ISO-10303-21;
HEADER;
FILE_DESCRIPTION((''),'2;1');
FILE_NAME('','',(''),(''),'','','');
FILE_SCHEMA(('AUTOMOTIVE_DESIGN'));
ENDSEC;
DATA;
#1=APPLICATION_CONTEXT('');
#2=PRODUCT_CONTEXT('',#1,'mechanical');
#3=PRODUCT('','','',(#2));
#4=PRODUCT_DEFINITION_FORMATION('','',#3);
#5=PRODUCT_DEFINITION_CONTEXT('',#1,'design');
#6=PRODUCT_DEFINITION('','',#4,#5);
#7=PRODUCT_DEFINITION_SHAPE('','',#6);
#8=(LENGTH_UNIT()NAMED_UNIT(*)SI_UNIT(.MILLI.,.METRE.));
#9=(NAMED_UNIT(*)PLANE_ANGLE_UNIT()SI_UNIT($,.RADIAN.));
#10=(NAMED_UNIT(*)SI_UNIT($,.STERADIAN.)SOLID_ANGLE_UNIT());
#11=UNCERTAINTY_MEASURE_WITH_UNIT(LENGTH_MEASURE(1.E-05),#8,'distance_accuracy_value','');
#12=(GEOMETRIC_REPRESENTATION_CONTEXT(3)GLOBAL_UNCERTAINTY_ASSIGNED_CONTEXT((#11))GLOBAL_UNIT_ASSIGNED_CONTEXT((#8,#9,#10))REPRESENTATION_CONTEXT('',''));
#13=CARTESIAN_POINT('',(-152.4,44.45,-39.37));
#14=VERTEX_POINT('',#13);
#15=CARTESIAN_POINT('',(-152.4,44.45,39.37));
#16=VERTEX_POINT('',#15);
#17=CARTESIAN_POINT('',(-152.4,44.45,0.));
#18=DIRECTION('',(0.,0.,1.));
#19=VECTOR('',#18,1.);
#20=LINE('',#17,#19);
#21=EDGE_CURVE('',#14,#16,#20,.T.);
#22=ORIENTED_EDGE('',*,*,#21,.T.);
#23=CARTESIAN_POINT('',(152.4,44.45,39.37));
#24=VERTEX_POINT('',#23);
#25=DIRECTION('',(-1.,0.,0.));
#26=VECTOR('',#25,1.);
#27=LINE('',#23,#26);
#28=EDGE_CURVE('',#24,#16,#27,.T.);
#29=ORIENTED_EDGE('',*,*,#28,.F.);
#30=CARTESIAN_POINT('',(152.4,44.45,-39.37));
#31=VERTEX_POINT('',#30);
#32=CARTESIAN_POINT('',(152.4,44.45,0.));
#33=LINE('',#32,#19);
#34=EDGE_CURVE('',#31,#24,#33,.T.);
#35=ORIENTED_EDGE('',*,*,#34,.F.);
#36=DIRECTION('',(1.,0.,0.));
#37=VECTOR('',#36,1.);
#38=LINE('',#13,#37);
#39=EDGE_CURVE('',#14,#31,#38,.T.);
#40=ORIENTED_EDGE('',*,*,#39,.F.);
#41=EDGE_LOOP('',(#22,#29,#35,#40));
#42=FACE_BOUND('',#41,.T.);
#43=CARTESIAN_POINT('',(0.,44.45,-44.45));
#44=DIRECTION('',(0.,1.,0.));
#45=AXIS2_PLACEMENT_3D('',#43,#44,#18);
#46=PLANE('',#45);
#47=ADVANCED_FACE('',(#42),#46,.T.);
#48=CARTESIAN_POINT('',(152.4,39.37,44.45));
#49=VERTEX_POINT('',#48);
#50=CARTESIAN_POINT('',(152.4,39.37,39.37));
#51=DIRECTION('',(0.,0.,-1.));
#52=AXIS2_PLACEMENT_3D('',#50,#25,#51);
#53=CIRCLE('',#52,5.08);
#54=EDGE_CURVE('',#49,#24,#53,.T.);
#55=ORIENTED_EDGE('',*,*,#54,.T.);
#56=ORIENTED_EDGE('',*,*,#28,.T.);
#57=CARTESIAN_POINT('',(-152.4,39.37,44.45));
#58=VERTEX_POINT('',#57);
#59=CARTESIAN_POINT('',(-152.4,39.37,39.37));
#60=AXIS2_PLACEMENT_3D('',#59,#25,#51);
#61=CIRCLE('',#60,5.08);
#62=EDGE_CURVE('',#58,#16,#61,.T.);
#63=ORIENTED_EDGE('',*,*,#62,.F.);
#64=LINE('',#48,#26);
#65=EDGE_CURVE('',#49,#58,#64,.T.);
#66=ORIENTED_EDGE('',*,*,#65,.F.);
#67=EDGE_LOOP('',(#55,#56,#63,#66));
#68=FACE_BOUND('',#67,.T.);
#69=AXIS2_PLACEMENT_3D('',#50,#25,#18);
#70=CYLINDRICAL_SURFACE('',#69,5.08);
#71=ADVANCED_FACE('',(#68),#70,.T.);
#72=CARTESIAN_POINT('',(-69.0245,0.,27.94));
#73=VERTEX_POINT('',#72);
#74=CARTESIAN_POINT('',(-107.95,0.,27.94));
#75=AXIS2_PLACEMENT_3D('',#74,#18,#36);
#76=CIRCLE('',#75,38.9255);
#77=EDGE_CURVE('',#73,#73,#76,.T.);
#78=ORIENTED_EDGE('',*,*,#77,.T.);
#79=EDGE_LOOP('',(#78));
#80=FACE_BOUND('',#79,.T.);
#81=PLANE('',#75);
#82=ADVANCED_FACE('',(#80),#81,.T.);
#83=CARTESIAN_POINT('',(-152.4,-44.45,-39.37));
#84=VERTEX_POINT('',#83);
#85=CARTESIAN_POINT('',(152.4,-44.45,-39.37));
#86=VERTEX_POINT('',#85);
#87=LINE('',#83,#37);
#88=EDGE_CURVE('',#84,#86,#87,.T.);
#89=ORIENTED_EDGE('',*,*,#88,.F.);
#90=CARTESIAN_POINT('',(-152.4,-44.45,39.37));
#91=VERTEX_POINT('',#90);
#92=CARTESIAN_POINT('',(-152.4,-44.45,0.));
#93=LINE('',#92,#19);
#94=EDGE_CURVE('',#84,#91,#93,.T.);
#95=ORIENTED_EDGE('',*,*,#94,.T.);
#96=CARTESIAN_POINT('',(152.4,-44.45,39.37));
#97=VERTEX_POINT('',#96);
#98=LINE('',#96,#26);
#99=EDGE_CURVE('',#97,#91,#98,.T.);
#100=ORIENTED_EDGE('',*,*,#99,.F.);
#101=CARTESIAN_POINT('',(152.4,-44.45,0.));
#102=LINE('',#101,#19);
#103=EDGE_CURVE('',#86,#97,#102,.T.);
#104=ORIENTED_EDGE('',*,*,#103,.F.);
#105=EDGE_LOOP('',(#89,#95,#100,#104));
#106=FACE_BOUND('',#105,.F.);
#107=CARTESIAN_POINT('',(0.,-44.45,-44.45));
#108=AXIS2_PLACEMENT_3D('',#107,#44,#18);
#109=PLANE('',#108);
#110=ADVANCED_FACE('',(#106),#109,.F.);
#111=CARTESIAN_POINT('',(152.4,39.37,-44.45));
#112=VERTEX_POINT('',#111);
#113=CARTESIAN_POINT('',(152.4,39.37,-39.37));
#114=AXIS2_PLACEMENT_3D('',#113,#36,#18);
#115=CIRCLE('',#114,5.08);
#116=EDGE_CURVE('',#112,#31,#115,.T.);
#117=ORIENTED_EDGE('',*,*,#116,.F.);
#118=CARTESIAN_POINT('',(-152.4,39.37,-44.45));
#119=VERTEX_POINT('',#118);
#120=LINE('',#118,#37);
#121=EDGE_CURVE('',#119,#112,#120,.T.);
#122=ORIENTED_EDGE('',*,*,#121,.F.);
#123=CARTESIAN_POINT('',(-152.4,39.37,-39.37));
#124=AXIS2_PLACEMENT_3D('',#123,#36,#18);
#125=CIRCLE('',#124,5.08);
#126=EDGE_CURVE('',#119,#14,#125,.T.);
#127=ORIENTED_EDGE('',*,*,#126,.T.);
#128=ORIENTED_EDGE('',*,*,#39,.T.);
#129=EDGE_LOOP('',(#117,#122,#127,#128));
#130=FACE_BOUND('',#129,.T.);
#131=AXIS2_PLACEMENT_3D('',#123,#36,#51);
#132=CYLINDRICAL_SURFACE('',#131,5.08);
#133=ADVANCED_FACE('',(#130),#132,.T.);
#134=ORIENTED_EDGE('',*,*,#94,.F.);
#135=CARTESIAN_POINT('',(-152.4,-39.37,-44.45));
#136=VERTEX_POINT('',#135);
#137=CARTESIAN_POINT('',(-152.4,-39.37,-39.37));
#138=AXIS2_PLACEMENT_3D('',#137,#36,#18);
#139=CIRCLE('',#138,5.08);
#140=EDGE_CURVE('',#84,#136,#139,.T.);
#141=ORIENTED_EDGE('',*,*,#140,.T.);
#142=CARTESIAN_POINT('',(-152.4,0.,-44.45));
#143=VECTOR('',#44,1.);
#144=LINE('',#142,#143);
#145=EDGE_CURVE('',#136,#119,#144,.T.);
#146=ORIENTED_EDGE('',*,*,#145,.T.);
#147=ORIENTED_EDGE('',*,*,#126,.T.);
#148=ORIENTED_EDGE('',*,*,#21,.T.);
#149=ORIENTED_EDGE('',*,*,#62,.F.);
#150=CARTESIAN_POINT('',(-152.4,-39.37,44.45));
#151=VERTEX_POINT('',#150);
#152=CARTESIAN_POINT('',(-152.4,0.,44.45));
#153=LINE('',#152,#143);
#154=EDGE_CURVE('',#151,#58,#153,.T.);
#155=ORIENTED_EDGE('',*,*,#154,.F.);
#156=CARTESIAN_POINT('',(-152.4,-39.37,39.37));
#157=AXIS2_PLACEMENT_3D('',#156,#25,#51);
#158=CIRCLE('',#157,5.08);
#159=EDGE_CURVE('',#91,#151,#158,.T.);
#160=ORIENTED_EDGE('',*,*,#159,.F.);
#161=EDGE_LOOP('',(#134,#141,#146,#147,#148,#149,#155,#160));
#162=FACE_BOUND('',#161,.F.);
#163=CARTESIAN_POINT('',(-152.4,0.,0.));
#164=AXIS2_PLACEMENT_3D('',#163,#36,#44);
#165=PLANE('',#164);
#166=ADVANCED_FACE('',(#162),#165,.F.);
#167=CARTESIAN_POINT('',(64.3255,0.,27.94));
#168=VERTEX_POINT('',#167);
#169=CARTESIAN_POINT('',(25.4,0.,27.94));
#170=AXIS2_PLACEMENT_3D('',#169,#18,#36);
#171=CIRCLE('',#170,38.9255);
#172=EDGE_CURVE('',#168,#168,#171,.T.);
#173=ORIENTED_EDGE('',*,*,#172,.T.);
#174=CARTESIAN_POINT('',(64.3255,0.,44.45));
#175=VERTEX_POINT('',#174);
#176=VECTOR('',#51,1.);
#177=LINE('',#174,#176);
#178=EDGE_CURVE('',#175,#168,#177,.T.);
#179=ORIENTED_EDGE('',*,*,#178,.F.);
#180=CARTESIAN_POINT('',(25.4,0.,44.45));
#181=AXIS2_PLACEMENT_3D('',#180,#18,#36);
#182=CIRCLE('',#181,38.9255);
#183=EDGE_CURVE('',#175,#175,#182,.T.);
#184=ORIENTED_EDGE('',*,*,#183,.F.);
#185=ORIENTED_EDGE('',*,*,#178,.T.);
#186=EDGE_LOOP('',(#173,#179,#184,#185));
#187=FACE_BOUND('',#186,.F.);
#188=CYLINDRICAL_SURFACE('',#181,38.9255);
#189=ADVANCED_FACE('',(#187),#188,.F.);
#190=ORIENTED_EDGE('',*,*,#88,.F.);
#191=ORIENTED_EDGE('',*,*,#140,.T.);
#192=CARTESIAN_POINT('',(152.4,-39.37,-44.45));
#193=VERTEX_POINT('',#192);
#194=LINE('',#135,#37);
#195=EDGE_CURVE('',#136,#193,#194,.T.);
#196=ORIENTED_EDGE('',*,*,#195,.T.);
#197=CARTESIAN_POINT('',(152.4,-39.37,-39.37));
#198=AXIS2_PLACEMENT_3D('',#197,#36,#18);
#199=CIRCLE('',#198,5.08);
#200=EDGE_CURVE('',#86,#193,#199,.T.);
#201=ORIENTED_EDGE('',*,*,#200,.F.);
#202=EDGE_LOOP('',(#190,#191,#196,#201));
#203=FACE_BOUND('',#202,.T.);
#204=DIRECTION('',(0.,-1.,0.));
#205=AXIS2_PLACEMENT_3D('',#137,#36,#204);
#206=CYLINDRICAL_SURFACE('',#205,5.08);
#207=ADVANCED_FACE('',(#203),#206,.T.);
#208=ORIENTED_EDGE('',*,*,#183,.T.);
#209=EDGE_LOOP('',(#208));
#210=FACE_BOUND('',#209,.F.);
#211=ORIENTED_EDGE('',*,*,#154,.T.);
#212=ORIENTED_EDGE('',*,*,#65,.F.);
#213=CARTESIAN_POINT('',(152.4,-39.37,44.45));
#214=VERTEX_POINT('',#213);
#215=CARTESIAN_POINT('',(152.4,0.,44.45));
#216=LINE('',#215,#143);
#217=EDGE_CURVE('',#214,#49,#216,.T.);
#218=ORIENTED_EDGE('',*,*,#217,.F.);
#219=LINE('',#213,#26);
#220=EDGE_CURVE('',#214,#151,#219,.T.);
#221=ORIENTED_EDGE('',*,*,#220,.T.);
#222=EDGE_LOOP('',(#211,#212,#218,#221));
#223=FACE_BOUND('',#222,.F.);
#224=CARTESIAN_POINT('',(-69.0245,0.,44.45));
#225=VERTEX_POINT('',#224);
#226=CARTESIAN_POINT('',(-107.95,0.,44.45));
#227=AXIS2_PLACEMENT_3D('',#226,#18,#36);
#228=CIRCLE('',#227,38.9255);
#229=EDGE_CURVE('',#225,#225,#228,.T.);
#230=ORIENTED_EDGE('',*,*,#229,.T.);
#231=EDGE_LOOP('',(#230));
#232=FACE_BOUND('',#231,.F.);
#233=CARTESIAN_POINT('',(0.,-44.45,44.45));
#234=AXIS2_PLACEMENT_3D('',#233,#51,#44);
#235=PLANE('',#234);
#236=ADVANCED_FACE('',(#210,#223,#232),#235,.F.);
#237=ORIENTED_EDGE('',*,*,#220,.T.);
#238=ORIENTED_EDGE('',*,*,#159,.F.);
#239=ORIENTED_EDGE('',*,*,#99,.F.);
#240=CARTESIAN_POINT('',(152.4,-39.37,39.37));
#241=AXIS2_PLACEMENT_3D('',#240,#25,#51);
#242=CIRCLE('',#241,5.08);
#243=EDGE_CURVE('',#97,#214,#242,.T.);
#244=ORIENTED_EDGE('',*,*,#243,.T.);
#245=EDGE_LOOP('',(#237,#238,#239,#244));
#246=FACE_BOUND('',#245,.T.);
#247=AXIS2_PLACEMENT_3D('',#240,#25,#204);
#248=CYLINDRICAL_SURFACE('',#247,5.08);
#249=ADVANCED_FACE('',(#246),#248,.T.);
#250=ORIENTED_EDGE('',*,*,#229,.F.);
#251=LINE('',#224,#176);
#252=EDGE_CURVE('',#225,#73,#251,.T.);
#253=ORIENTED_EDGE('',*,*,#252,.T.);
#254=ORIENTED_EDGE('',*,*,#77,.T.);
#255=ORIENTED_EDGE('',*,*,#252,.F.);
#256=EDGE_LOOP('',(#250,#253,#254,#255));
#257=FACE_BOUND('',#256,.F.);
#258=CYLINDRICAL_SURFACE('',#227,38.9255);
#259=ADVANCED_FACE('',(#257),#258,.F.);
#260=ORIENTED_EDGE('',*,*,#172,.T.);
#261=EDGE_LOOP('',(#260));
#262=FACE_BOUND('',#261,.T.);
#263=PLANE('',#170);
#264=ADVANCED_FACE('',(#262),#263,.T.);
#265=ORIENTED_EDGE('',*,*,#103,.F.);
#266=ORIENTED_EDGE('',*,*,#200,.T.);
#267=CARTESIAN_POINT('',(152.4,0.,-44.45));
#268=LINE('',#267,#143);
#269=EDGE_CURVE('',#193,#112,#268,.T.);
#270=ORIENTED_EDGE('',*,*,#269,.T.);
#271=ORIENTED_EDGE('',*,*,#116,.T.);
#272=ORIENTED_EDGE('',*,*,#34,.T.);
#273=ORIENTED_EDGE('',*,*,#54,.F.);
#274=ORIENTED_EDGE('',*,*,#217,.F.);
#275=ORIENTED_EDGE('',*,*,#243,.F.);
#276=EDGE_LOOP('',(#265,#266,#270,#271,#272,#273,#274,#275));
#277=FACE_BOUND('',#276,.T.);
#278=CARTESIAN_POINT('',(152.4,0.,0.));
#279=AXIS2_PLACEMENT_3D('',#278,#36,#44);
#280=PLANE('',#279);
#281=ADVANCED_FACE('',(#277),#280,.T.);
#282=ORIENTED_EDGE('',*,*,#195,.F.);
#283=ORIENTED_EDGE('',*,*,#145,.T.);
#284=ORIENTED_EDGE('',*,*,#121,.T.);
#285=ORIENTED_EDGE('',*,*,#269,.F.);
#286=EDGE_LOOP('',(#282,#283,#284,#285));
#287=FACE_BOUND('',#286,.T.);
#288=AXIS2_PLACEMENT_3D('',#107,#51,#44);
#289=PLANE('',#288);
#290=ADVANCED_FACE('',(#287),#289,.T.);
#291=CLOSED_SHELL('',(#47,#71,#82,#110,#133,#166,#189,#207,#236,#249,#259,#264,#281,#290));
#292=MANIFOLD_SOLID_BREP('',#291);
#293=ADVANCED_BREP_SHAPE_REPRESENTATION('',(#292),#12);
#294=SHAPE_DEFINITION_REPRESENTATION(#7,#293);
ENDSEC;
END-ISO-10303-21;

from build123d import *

# Parameters (mm, degrees)
F0_W          = 88.9
F0_H          = 88.9
F1_DEPTH      = 152.4
F1_DEPTH_BACK = 152.4
F2_R          = 38.9255
F3_DEPTH      = 16.51
F4_R          = 5.08


with BuildPart() as f1:
    # F0 (on Right) → F1 (new body, two sides)
    with BuildSketch(Plane.YZ) as f1_sk:
        Rectangle(F0_W, F0_H)
    extrude(amount=F1_DEPTH)
    extrude(f1_sk.sketch, amount=-F1_DEPTH_BACK)

    # F2 (on face) → F3 (cut)
    with BuildSketch(Plane.XY.offset(44.45)):
        with Locations((-107.95, 0)):
            Circle(F2_R)
        with Locations((25.4, 0)):
            Circle(F2_R)
    extrude(amount=-F3_DEPTH, mode=Mode.SUBTRACT)

    # F4
    f4_edges = [f1.edges().sort_by_distance(p)[0] for p in [
        (0, -44.45, 44.45),
        (0, 44.45, 44.45),
        (0, -44.45, -44.45),
        (0, 44.45, -44.45),
    ]]
    fillet(f4_edges, radius=F4_R)


solid = f1.part
